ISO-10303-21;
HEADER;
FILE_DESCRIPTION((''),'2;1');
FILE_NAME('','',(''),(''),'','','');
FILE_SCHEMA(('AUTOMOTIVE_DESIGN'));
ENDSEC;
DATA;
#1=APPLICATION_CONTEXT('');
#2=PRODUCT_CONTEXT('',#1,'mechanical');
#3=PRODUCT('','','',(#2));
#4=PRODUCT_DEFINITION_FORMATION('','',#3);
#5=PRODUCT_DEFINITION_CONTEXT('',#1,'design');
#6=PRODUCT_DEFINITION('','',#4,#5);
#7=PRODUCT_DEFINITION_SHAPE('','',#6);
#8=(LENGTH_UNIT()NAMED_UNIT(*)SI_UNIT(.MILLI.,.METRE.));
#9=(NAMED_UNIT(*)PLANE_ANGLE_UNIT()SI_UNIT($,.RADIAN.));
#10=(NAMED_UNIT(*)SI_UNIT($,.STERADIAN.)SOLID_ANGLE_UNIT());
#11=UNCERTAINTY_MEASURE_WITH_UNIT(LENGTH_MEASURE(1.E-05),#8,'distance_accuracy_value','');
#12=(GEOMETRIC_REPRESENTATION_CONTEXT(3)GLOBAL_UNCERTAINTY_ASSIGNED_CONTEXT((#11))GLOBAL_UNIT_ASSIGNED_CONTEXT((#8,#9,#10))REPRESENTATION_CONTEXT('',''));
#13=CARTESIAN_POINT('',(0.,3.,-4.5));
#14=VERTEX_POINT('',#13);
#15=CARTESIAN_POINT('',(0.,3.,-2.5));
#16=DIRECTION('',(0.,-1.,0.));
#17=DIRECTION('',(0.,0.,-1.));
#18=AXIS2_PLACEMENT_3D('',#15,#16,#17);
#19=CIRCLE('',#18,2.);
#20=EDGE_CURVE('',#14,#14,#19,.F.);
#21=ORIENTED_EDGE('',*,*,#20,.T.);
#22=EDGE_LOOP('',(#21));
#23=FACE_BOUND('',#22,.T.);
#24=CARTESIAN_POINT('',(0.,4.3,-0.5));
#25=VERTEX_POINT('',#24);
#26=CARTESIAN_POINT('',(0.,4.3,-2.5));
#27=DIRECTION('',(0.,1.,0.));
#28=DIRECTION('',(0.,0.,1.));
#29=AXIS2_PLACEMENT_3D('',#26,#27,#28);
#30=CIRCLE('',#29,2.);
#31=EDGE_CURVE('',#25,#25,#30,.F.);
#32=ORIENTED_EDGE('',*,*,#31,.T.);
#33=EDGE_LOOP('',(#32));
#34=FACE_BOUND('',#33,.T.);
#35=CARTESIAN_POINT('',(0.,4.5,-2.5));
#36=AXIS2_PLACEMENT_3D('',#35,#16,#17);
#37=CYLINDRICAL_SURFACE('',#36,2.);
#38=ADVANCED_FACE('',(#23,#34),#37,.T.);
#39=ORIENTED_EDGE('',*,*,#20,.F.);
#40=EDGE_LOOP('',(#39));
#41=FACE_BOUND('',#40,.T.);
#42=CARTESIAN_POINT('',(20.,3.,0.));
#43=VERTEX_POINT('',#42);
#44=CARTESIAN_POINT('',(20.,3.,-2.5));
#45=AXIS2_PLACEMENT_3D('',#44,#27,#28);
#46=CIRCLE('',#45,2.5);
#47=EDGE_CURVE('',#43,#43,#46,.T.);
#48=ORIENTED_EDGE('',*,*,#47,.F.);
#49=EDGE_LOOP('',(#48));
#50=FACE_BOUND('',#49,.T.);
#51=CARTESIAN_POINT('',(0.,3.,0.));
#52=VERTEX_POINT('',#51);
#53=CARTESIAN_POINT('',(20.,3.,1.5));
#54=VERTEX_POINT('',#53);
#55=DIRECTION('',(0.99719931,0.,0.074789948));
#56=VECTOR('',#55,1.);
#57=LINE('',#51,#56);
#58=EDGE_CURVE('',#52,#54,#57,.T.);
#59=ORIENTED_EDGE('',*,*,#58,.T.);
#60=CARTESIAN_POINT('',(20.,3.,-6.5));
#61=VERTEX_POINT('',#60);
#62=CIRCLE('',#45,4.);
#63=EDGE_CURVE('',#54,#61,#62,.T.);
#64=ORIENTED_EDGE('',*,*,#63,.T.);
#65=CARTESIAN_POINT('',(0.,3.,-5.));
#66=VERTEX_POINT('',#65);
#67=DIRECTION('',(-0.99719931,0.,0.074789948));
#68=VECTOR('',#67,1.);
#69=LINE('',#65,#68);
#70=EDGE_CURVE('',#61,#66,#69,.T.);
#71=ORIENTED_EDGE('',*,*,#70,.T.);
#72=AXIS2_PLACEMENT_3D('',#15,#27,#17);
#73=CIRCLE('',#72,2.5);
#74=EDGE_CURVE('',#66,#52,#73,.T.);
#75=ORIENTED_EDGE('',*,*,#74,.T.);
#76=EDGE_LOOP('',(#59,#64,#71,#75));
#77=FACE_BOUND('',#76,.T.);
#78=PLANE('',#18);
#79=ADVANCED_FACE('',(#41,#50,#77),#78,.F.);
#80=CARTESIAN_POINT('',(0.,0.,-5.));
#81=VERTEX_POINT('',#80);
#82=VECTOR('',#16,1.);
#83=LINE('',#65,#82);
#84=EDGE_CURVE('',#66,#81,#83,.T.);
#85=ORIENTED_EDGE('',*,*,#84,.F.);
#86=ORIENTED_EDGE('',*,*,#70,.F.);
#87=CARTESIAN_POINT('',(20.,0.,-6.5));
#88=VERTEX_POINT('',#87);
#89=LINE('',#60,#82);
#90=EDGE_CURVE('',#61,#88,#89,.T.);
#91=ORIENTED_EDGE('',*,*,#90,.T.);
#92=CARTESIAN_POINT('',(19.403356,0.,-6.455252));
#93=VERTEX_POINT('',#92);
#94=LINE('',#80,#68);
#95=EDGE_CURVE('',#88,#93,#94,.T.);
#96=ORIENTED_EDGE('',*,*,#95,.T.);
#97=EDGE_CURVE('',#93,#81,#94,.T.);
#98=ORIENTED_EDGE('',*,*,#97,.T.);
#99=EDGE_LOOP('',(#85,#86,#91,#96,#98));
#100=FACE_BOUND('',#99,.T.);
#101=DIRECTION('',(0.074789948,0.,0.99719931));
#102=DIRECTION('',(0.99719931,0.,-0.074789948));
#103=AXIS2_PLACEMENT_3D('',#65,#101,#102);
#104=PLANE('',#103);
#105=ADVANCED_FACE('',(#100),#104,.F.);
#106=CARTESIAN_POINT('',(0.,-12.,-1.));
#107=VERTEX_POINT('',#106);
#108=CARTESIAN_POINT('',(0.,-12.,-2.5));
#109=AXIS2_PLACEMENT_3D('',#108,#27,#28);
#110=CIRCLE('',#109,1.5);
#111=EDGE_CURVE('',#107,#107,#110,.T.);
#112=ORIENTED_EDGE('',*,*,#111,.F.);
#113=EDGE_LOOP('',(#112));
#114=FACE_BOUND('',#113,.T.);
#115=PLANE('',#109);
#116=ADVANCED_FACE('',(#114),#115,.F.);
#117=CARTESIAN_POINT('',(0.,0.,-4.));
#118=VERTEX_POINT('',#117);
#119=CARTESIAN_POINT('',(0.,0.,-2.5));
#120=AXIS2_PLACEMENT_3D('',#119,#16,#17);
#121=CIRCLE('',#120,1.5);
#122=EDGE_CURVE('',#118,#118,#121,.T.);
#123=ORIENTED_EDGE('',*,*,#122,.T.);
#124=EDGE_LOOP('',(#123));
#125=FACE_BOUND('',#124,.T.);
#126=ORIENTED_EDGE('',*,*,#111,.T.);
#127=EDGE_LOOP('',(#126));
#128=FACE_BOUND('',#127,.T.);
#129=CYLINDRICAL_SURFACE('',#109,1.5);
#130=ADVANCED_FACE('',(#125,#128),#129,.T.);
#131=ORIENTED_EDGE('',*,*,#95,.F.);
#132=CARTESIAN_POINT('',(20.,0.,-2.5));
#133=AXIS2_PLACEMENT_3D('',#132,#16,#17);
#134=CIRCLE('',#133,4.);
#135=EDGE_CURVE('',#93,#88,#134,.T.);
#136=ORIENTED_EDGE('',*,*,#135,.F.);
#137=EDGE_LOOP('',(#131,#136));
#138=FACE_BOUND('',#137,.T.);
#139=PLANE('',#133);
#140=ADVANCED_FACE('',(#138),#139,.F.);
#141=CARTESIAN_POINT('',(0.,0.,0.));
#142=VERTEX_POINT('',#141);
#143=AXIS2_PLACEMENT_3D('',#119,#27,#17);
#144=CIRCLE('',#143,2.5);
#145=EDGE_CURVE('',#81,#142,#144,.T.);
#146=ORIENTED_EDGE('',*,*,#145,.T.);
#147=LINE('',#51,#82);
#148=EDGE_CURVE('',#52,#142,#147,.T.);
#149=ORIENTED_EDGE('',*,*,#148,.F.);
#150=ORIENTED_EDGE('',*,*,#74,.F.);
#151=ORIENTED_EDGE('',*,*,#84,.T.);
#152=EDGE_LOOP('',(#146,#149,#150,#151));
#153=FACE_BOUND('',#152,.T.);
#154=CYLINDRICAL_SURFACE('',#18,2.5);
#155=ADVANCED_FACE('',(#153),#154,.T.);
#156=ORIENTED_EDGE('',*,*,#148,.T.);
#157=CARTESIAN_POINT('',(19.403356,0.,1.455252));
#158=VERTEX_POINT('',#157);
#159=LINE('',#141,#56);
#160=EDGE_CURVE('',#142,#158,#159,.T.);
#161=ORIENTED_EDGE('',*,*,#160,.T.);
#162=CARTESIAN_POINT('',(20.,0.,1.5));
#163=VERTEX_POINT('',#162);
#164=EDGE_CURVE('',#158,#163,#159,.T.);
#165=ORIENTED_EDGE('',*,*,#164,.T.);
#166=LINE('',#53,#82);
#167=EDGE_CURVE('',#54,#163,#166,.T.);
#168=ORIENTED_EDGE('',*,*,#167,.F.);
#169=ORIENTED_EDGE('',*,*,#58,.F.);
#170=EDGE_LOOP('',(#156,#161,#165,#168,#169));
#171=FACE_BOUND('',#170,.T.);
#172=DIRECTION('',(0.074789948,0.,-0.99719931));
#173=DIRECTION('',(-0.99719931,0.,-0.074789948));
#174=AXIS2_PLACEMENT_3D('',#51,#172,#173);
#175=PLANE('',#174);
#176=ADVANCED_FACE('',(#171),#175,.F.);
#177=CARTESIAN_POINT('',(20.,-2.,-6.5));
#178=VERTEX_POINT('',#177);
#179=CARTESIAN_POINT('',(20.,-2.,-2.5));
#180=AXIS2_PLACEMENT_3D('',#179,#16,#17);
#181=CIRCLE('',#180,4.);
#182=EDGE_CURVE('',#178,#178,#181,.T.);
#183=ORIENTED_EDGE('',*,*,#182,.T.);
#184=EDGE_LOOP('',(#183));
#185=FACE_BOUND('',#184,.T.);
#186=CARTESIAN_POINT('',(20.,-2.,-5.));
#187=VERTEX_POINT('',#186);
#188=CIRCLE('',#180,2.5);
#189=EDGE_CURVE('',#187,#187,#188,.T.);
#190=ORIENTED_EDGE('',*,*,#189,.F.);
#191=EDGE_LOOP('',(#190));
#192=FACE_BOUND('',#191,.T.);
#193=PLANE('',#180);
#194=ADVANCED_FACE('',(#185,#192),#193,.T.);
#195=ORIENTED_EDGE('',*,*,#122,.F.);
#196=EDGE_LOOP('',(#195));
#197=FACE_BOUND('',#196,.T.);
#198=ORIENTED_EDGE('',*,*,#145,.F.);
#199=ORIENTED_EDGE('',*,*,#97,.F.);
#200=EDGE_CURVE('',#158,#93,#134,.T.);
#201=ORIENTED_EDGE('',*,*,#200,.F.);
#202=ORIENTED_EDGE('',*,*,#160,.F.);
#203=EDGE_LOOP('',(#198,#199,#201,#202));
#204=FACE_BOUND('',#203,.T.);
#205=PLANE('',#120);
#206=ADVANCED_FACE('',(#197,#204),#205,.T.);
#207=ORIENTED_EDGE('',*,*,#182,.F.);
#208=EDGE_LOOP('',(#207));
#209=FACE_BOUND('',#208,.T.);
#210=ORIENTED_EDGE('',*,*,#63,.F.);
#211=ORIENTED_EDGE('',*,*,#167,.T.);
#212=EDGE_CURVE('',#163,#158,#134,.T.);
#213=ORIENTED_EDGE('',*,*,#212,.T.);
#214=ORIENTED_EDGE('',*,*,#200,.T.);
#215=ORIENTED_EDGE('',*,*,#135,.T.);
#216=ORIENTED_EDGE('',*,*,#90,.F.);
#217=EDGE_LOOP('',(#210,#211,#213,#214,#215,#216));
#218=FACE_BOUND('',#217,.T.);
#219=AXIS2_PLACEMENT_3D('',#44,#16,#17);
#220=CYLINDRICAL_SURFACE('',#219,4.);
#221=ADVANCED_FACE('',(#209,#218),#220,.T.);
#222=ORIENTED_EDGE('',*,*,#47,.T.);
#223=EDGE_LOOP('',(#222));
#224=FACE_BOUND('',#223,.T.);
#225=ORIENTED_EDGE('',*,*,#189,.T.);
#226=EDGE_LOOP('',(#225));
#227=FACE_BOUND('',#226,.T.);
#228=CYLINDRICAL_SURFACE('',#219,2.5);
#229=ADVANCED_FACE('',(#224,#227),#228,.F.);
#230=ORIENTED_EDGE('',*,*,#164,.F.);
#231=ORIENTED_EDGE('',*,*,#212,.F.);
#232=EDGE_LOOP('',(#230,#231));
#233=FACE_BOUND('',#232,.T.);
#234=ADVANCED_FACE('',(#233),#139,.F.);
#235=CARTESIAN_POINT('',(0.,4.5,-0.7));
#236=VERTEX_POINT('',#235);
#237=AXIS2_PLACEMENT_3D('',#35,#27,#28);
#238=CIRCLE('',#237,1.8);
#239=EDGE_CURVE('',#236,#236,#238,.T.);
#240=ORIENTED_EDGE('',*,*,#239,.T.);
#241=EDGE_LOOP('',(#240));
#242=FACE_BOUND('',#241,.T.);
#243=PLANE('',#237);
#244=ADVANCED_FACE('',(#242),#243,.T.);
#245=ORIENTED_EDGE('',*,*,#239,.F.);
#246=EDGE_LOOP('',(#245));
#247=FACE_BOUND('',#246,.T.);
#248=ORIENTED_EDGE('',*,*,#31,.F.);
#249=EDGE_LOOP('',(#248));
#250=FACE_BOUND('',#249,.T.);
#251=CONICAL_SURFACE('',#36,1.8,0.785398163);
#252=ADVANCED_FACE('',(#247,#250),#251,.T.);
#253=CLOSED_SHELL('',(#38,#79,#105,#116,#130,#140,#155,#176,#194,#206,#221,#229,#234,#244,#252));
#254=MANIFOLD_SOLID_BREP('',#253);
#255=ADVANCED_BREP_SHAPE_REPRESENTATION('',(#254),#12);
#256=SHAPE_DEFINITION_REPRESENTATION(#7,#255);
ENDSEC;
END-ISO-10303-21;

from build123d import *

# Parameters (mm, degrees)
SKETCH3_R           = 1.5
SKETCH3_R_2         = 2.5
BOSS_EXTRUDE1_DEPTH = 3
BOSS_EXTRUDE2_START = 2
SKETCH4_R           = 4
SKETCH4_R_2         = 2.5
BOSS_EXTRUDE2_DEPTH = 2
BOSS_EXTRUDE3_START = -15
SKETCH5_R           = 1.5
BOSS_EXTRUDE3_DEPTH = 15
SKETCH6_R           = 2
BOSS_EXTRUDE4_DEPTH = 1.5
CHAMFER1_SIZE       = 0.2


with BuildPart() as part:
    # Sketch3 → Boss-Extrude1 (new body)
    with BuildSketch(Plane(origin=(0, 0, 0), x_dir=(1, 0, 0), z_dir=(0, 1, 0))):
        with BuildLine():
            Line((0, 0), (20, -1.5))
            ThreePointArc((20, -1.5), (24, 2.5), (20, 6.5))
            Line((20, 6.5), (0, 5))
            ThreePointArc((0, 5), (-2.5, 2.5), (0, 0))
        make_face()
        with Locations((0, 2.5)):
            Circle(SKETCH3_R, mode=Mode.SUBTRACT)
        with Locations((20, 2.5)):
            Circle(SKETCH3_R_2, mode=Mode.SUBTRACT)
    extrude(amount=BOSS_EXTRUDE1_DEPTH)

    # Sketch4 → Boss-Extrude2 (add)
    with BuildSketch(Plane.XZ.offset(BOSS_EXTRUDE2_START)):
        with Locations((20, -2.5)):
            Circle(SKETCH4_R)
        with Locations((20, -2.5)):
            Circle(SKETCH4_R_2, mode=Mode.SUBTRACT)
    extrude(amount=-BOSS_EXTRUDE2_DEPTH)

    # Sketch5 → Boss-Extrude3 (add)
    with BuildSketch(Plane(origin=(0, 3, 0), x_dir=(1, 0, 0), z_dir=(0, 1, 0)).offset(BOSS_EXTRUDE3_START)):
        with Locations((0, 2.5)):
            Circle(SKETCH5_R)
    extrude(amount=BOSS_EXTRUDE3_DEPTH)

    # Sketch6 → Boss-Extrude4 (add)
    with BuildSketch(Plane(origin=(0, 3, 0), x_dir=(1, 0, 0), z_dir=(0, 1, 0))):
        with Locations((0, 2.5)):
            Circle(SKETCH6_R)
    extrude(amount=BOSS_EXTRUDE4_DEPTH)

    # Chamfer1
    chamfer1_edges = [part.edges().sort_by_distance(p)[0] for p in [
        (-2, 4.5, -2.5),
    ]]
    chamfer(chamfer1_edges, length=CHAMFER1_SIZE)


solid = part.part
